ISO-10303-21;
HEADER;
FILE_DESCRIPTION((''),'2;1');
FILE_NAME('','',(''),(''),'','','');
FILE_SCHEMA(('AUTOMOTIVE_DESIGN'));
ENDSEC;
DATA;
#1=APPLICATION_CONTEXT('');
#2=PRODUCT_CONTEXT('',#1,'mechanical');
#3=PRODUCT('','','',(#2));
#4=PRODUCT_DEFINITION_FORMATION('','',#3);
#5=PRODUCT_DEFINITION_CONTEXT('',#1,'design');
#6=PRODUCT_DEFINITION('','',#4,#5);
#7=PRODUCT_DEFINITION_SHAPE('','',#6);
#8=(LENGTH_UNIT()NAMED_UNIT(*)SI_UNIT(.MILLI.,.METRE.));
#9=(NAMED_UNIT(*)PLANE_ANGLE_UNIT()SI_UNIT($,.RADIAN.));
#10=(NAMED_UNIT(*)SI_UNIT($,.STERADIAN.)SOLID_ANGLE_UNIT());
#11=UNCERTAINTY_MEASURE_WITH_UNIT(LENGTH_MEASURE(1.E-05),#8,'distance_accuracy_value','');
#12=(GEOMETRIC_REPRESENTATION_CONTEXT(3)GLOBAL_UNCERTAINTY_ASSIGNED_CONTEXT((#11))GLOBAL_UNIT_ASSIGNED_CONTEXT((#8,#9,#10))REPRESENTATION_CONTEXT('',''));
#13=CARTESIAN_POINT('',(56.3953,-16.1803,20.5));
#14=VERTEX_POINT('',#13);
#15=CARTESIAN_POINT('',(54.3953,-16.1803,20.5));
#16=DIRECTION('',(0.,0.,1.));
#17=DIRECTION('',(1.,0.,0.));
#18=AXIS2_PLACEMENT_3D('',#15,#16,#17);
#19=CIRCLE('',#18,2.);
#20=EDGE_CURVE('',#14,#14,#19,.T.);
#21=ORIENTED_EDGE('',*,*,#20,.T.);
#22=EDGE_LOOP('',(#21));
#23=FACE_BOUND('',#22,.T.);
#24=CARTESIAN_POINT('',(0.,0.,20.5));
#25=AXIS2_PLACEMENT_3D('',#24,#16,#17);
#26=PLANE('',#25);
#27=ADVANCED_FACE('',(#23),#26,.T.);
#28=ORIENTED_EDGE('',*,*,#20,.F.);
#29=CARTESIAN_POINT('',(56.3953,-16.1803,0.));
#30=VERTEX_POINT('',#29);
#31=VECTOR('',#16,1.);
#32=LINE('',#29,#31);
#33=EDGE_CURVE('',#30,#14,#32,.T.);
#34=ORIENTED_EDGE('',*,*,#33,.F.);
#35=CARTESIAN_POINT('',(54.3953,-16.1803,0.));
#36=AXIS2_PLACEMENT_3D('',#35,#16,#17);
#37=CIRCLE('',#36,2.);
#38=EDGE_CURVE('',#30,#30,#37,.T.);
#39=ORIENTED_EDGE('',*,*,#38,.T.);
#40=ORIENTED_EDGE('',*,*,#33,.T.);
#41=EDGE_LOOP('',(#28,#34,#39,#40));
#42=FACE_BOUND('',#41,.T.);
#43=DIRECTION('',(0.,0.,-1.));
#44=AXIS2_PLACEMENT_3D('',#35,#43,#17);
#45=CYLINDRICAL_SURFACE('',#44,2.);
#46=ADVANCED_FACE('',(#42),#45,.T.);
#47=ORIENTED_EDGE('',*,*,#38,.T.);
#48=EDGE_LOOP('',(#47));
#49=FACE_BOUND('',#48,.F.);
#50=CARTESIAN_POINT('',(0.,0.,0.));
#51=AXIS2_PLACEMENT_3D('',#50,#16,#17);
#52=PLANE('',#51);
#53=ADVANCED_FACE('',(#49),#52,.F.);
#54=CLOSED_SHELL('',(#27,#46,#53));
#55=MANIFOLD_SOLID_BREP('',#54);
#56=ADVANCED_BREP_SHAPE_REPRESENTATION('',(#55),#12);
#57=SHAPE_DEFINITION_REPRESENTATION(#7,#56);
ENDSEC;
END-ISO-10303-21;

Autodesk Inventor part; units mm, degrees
ref_plane "Work Plane1" through (0, 0, 0) normal (0, 0, 1) x (1, 0, 0)
sketch "Sketch1" plane through (0, 0, 0) normal (0, 0, 1) x (1, 0, 0)
  circle A0 centre (54.3953, -16.1803) radius 4.0005 projected
  circle A1 centre (54.3953, -16.1803) radius 2
  point P0 (0, 0)
ref_plane "Work Plane2" through (0, -29.5, -27) normal (0, 0, -1) x (0, 1, 0)
ref_plane "Work Plane3" through (38.9126, -31.7019, -38) normal (0, 0, -1) x (0.3642575, 0.9312983, 0)
extrude "Extrusion1" add sketch "Sketch1" along normal blind 20.5 contours A1
properties part number "smolGear_shaft" material "Aluminum 6061"
